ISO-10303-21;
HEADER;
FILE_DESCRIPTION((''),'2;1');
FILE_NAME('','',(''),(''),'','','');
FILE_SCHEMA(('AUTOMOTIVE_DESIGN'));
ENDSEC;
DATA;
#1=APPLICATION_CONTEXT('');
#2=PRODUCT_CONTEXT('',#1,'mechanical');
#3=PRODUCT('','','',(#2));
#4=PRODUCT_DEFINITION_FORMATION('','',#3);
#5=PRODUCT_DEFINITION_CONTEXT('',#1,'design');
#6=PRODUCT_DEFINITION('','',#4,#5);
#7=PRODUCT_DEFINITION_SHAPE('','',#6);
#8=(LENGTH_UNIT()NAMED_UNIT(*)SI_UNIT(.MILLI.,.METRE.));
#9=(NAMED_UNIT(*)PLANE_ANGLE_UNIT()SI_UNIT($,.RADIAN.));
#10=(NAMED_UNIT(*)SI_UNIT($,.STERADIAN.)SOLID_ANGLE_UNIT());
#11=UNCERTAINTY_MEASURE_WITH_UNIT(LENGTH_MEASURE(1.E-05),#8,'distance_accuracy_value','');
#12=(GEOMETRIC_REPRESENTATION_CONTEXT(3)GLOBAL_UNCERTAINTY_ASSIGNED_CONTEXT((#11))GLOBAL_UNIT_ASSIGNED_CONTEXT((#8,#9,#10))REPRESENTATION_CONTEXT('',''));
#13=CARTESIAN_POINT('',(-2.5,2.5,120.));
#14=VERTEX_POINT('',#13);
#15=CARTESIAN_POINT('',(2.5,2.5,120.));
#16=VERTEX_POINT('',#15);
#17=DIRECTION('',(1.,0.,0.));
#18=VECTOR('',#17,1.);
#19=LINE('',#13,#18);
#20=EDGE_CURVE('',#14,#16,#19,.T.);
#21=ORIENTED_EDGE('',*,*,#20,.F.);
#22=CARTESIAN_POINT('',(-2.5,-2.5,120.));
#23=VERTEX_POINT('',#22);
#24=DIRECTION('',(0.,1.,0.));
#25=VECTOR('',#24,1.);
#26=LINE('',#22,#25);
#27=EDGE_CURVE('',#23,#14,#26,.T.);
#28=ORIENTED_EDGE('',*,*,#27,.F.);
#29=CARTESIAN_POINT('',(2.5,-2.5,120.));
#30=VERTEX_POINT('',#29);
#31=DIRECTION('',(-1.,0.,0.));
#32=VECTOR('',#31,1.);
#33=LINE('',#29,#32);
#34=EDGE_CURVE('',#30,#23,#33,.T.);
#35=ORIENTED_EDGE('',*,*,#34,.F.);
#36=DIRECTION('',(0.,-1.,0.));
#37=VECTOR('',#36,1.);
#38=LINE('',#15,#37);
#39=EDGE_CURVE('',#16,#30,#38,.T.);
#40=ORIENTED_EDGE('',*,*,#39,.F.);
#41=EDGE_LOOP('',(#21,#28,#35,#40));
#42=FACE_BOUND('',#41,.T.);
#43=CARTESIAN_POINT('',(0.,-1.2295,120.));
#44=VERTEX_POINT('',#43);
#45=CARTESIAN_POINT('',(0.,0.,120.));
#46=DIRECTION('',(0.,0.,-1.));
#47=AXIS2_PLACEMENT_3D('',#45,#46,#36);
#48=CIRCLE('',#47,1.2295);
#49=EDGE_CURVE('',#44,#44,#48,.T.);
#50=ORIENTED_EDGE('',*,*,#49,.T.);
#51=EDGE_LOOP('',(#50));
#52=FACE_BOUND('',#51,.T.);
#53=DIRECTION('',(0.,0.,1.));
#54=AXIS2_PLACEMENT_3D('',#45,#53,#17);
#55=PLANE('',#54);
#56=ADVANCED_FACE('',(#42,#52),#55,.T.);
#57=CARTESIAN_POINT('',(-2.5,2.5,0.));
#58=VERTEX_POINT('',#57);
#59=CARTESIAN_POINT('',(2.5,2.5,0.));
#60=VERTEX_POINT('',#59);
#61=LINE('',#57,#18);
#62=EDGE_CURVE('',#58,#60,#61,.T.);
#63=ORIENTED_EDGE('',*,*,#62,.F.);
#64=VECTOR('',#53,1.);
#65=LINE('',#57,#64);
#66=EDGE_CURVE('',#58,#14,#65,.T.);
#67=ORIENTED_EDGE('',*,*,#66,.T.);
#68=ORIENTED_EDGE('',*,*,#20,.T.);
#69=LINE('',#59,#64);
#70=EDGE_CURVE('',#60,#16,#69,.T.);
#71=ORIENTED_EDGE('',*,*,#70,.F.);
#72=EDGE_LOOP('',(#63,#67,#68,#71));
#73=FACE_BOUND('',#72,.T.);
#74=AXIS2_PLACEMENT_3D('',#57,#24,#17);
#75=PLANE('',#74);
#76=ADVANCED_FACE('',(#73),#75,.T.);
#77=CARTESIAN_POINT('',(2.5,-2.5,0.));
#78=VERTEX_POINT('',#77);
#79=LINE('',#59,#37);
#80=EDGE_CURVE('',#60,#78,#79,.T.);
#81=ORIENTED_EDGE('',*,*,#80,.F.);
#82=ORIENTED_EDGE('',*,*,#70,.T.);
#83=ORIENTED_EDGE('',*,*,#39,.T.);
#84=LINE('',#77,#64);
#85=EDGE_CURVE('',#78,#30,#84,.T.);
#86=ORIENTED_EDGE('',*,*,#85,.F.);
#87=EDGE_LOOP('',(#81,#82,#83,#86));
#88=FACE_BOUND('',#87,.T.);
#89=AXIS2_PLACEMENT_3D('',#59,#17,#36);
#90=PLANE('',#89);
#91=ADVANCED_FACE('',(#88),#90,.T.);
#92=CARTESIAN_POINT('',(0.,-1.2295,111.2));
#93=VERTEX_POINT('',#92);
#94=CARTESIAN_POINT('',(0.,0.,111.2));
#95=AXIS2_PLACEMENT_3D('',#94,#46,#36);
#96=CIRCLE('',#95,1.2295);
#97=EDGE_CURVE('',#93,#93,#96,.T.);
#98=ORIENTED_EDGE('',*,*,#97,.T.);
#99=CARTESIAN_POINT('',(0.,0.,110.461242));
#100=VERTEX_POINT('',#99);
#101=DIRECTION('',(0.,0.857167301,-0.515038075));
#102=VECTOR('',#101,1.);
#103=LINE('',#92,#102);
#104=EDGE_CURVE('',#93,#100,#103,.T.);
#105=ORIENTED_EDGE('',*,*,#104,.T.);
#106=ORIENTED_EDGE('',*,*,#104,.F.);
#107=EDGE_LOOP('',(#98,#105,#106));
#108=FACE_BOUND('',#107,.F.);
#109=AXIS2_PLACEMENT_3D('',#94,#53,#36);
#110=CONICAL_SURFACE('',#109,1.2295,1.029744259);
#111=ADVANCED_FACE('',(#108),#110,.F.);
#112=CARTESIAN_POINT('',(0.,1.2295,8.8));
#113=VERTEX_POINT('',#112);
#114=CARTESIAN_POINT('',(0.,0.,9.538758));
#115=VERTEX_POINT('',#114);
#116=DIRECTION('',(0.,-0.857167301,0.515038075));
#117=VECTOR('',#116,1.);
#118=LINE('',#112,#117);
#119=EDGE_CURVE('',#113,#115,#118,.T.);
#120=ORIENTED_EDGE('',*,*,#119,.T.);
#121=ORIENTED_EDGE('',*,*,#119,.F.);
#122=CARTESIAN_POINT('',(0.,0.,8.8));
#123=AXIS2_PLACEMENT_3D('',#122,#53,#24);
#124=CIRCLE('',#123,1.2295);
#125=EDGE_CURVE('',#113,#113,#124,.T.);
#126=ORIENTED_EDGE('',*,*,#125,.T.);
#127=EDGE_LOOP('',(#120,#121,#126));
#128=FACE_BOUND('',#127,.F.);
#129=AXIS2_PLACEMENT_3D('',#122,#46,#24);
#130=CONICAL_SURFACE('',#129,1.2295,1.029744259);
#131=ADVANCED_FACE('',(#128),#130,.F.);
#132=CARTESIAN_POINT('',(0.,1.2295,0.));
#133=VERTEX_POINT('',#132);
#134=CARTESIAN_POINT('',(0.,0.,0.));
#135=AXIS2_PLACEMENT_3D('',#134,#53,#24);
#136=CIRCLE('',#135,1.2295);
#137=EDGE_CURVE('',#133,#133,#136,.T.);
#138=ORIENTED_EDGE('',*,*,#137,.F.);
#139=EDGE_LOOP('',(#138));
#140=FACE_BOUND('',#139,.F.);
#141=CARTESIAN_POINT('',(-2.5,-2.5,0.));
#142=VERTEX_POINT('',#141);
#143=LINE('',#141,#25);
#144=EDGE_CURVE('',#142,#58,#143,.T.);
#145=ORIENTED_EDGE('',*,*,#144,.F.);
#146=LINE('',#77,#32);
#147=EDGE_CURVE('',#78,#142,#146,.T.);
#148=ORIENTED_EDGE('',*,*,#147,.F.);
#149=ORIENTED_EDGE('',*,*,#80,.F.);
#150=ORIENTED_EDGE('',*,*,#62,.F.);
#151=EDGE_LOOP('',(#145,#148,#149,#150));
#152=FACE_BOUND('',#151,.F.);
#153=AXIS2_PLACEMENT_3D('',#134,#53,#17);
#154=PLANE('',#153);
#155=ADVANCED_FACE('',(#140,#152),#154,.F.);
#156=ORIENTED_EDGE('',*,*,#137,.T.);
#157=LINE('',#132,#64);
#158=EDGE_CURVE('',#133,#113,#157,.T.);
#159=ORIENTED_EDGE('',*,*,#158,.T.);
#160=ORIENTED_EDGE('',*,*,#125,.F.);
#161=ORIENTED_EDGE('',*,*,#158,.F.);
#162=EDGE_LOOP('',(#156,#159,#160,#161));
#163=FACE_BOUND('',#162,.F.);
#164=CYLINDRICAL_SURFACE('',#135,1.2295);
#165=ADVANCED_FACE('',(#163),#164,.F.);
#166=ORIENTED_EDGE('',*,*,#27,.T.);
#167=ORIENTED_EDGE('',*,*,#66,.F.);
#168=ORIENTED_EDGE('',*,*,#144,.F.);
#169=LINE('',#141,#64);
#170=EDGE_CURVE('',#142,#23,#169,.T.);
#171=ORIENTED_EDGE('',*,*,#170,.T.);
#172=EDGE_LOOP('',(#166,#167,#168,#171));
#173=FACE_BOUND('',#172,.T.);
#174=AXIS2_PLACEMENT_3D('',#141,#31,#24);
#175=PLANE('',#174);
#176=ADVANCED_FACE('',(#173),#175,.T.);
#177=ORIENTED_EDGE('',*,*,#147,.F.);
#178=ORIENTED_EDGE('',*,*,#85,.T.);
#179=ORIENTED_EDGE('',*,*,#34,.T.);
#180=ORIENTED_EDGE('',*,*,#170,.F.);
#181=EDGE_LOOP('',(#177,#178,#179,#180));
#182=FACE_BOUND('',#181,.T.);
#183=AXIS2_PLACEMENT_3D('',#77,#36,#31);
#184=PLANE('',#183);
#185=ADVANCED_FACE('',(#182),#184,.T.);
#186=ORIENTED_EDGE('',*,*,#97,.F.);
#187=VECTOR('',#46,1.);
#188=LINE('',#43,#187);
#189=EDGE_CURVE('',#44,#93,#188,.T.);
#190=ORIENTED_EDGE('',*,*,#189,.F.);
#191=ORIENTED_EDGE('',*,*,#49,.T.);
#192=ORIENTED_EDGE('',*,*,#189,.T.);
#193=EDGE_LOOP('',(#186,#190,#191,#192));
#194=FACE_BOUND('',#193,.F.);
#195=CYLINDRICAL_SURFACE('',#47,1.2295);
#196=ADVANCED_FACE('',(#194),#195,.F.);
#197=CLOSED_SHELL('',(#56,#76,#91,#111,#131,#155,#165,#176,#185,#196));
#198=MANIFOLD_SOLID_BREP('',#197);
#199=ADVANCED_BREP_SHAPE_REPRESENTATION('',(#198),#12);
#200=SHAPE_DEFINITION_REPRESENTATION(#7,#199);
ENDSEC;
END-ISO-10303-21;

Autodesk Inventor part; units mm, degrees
ref_plane "YZ Plane" through (0, 0, 0) normal (1, 0, 0) x (0, 1, 0)
ref_plane "XZ Plane" through (0, 0, 0) normal (0, 1, 0) x (-1, 0, 0)
ref_plane "XY Plane" through (0, 0, 0) normal (0, 0, 1) x (1, 0, 0)
sketch "スケッチ1" plane through (0, 0, 0) normal (0, 0, 1) x (1, 0, 0)
  line L0 (-2.5, 2.5) -> (2.5, 2.5)
  line L1 (2.5, 2.5) -> (2.5, -2.5)
  line L2 (2.5, -2.5) -> (-2.5, -2.5)
  line L3 (-2.5, -2.5) -> (-2.5, 2.5)
  point P0 (0, 0)
  point P1 (-2.5, 0)
  point P2 (0, 2.5)
  dimension "d4" = 5
  dimension "d5" = 5
extrude "押し出し1" add sketch "スケッチ1" along normal blind 120
sketch "スケッチ2" plane through (0, 0, 120) normal (0, 0, 1) x (1, 0, 0)
  point P0 (0, 0)
hole "穴1" at (0, 0, 120) direction (0, 0, -1) diameter 2.459 depth 8.8 tip angle 118 thread size "M3x0.5" class "6H" standard "ISO Metric profile"
sketch "スケッチ3" plane through (0, 0, 0) normal (0, 0, -1) x (-1, 0, 0)
  point P0 (0, 0)
  point P1 (0, 0)
hole "穴2" at (0, 0, 0) direction (0, 0, 1) diameter 2.459 depth 8.8 tip angle 118 thread size "M3x0.5" class "6H" standard "ISO Metric profile"
properties part number "回収機構スペーサ"
